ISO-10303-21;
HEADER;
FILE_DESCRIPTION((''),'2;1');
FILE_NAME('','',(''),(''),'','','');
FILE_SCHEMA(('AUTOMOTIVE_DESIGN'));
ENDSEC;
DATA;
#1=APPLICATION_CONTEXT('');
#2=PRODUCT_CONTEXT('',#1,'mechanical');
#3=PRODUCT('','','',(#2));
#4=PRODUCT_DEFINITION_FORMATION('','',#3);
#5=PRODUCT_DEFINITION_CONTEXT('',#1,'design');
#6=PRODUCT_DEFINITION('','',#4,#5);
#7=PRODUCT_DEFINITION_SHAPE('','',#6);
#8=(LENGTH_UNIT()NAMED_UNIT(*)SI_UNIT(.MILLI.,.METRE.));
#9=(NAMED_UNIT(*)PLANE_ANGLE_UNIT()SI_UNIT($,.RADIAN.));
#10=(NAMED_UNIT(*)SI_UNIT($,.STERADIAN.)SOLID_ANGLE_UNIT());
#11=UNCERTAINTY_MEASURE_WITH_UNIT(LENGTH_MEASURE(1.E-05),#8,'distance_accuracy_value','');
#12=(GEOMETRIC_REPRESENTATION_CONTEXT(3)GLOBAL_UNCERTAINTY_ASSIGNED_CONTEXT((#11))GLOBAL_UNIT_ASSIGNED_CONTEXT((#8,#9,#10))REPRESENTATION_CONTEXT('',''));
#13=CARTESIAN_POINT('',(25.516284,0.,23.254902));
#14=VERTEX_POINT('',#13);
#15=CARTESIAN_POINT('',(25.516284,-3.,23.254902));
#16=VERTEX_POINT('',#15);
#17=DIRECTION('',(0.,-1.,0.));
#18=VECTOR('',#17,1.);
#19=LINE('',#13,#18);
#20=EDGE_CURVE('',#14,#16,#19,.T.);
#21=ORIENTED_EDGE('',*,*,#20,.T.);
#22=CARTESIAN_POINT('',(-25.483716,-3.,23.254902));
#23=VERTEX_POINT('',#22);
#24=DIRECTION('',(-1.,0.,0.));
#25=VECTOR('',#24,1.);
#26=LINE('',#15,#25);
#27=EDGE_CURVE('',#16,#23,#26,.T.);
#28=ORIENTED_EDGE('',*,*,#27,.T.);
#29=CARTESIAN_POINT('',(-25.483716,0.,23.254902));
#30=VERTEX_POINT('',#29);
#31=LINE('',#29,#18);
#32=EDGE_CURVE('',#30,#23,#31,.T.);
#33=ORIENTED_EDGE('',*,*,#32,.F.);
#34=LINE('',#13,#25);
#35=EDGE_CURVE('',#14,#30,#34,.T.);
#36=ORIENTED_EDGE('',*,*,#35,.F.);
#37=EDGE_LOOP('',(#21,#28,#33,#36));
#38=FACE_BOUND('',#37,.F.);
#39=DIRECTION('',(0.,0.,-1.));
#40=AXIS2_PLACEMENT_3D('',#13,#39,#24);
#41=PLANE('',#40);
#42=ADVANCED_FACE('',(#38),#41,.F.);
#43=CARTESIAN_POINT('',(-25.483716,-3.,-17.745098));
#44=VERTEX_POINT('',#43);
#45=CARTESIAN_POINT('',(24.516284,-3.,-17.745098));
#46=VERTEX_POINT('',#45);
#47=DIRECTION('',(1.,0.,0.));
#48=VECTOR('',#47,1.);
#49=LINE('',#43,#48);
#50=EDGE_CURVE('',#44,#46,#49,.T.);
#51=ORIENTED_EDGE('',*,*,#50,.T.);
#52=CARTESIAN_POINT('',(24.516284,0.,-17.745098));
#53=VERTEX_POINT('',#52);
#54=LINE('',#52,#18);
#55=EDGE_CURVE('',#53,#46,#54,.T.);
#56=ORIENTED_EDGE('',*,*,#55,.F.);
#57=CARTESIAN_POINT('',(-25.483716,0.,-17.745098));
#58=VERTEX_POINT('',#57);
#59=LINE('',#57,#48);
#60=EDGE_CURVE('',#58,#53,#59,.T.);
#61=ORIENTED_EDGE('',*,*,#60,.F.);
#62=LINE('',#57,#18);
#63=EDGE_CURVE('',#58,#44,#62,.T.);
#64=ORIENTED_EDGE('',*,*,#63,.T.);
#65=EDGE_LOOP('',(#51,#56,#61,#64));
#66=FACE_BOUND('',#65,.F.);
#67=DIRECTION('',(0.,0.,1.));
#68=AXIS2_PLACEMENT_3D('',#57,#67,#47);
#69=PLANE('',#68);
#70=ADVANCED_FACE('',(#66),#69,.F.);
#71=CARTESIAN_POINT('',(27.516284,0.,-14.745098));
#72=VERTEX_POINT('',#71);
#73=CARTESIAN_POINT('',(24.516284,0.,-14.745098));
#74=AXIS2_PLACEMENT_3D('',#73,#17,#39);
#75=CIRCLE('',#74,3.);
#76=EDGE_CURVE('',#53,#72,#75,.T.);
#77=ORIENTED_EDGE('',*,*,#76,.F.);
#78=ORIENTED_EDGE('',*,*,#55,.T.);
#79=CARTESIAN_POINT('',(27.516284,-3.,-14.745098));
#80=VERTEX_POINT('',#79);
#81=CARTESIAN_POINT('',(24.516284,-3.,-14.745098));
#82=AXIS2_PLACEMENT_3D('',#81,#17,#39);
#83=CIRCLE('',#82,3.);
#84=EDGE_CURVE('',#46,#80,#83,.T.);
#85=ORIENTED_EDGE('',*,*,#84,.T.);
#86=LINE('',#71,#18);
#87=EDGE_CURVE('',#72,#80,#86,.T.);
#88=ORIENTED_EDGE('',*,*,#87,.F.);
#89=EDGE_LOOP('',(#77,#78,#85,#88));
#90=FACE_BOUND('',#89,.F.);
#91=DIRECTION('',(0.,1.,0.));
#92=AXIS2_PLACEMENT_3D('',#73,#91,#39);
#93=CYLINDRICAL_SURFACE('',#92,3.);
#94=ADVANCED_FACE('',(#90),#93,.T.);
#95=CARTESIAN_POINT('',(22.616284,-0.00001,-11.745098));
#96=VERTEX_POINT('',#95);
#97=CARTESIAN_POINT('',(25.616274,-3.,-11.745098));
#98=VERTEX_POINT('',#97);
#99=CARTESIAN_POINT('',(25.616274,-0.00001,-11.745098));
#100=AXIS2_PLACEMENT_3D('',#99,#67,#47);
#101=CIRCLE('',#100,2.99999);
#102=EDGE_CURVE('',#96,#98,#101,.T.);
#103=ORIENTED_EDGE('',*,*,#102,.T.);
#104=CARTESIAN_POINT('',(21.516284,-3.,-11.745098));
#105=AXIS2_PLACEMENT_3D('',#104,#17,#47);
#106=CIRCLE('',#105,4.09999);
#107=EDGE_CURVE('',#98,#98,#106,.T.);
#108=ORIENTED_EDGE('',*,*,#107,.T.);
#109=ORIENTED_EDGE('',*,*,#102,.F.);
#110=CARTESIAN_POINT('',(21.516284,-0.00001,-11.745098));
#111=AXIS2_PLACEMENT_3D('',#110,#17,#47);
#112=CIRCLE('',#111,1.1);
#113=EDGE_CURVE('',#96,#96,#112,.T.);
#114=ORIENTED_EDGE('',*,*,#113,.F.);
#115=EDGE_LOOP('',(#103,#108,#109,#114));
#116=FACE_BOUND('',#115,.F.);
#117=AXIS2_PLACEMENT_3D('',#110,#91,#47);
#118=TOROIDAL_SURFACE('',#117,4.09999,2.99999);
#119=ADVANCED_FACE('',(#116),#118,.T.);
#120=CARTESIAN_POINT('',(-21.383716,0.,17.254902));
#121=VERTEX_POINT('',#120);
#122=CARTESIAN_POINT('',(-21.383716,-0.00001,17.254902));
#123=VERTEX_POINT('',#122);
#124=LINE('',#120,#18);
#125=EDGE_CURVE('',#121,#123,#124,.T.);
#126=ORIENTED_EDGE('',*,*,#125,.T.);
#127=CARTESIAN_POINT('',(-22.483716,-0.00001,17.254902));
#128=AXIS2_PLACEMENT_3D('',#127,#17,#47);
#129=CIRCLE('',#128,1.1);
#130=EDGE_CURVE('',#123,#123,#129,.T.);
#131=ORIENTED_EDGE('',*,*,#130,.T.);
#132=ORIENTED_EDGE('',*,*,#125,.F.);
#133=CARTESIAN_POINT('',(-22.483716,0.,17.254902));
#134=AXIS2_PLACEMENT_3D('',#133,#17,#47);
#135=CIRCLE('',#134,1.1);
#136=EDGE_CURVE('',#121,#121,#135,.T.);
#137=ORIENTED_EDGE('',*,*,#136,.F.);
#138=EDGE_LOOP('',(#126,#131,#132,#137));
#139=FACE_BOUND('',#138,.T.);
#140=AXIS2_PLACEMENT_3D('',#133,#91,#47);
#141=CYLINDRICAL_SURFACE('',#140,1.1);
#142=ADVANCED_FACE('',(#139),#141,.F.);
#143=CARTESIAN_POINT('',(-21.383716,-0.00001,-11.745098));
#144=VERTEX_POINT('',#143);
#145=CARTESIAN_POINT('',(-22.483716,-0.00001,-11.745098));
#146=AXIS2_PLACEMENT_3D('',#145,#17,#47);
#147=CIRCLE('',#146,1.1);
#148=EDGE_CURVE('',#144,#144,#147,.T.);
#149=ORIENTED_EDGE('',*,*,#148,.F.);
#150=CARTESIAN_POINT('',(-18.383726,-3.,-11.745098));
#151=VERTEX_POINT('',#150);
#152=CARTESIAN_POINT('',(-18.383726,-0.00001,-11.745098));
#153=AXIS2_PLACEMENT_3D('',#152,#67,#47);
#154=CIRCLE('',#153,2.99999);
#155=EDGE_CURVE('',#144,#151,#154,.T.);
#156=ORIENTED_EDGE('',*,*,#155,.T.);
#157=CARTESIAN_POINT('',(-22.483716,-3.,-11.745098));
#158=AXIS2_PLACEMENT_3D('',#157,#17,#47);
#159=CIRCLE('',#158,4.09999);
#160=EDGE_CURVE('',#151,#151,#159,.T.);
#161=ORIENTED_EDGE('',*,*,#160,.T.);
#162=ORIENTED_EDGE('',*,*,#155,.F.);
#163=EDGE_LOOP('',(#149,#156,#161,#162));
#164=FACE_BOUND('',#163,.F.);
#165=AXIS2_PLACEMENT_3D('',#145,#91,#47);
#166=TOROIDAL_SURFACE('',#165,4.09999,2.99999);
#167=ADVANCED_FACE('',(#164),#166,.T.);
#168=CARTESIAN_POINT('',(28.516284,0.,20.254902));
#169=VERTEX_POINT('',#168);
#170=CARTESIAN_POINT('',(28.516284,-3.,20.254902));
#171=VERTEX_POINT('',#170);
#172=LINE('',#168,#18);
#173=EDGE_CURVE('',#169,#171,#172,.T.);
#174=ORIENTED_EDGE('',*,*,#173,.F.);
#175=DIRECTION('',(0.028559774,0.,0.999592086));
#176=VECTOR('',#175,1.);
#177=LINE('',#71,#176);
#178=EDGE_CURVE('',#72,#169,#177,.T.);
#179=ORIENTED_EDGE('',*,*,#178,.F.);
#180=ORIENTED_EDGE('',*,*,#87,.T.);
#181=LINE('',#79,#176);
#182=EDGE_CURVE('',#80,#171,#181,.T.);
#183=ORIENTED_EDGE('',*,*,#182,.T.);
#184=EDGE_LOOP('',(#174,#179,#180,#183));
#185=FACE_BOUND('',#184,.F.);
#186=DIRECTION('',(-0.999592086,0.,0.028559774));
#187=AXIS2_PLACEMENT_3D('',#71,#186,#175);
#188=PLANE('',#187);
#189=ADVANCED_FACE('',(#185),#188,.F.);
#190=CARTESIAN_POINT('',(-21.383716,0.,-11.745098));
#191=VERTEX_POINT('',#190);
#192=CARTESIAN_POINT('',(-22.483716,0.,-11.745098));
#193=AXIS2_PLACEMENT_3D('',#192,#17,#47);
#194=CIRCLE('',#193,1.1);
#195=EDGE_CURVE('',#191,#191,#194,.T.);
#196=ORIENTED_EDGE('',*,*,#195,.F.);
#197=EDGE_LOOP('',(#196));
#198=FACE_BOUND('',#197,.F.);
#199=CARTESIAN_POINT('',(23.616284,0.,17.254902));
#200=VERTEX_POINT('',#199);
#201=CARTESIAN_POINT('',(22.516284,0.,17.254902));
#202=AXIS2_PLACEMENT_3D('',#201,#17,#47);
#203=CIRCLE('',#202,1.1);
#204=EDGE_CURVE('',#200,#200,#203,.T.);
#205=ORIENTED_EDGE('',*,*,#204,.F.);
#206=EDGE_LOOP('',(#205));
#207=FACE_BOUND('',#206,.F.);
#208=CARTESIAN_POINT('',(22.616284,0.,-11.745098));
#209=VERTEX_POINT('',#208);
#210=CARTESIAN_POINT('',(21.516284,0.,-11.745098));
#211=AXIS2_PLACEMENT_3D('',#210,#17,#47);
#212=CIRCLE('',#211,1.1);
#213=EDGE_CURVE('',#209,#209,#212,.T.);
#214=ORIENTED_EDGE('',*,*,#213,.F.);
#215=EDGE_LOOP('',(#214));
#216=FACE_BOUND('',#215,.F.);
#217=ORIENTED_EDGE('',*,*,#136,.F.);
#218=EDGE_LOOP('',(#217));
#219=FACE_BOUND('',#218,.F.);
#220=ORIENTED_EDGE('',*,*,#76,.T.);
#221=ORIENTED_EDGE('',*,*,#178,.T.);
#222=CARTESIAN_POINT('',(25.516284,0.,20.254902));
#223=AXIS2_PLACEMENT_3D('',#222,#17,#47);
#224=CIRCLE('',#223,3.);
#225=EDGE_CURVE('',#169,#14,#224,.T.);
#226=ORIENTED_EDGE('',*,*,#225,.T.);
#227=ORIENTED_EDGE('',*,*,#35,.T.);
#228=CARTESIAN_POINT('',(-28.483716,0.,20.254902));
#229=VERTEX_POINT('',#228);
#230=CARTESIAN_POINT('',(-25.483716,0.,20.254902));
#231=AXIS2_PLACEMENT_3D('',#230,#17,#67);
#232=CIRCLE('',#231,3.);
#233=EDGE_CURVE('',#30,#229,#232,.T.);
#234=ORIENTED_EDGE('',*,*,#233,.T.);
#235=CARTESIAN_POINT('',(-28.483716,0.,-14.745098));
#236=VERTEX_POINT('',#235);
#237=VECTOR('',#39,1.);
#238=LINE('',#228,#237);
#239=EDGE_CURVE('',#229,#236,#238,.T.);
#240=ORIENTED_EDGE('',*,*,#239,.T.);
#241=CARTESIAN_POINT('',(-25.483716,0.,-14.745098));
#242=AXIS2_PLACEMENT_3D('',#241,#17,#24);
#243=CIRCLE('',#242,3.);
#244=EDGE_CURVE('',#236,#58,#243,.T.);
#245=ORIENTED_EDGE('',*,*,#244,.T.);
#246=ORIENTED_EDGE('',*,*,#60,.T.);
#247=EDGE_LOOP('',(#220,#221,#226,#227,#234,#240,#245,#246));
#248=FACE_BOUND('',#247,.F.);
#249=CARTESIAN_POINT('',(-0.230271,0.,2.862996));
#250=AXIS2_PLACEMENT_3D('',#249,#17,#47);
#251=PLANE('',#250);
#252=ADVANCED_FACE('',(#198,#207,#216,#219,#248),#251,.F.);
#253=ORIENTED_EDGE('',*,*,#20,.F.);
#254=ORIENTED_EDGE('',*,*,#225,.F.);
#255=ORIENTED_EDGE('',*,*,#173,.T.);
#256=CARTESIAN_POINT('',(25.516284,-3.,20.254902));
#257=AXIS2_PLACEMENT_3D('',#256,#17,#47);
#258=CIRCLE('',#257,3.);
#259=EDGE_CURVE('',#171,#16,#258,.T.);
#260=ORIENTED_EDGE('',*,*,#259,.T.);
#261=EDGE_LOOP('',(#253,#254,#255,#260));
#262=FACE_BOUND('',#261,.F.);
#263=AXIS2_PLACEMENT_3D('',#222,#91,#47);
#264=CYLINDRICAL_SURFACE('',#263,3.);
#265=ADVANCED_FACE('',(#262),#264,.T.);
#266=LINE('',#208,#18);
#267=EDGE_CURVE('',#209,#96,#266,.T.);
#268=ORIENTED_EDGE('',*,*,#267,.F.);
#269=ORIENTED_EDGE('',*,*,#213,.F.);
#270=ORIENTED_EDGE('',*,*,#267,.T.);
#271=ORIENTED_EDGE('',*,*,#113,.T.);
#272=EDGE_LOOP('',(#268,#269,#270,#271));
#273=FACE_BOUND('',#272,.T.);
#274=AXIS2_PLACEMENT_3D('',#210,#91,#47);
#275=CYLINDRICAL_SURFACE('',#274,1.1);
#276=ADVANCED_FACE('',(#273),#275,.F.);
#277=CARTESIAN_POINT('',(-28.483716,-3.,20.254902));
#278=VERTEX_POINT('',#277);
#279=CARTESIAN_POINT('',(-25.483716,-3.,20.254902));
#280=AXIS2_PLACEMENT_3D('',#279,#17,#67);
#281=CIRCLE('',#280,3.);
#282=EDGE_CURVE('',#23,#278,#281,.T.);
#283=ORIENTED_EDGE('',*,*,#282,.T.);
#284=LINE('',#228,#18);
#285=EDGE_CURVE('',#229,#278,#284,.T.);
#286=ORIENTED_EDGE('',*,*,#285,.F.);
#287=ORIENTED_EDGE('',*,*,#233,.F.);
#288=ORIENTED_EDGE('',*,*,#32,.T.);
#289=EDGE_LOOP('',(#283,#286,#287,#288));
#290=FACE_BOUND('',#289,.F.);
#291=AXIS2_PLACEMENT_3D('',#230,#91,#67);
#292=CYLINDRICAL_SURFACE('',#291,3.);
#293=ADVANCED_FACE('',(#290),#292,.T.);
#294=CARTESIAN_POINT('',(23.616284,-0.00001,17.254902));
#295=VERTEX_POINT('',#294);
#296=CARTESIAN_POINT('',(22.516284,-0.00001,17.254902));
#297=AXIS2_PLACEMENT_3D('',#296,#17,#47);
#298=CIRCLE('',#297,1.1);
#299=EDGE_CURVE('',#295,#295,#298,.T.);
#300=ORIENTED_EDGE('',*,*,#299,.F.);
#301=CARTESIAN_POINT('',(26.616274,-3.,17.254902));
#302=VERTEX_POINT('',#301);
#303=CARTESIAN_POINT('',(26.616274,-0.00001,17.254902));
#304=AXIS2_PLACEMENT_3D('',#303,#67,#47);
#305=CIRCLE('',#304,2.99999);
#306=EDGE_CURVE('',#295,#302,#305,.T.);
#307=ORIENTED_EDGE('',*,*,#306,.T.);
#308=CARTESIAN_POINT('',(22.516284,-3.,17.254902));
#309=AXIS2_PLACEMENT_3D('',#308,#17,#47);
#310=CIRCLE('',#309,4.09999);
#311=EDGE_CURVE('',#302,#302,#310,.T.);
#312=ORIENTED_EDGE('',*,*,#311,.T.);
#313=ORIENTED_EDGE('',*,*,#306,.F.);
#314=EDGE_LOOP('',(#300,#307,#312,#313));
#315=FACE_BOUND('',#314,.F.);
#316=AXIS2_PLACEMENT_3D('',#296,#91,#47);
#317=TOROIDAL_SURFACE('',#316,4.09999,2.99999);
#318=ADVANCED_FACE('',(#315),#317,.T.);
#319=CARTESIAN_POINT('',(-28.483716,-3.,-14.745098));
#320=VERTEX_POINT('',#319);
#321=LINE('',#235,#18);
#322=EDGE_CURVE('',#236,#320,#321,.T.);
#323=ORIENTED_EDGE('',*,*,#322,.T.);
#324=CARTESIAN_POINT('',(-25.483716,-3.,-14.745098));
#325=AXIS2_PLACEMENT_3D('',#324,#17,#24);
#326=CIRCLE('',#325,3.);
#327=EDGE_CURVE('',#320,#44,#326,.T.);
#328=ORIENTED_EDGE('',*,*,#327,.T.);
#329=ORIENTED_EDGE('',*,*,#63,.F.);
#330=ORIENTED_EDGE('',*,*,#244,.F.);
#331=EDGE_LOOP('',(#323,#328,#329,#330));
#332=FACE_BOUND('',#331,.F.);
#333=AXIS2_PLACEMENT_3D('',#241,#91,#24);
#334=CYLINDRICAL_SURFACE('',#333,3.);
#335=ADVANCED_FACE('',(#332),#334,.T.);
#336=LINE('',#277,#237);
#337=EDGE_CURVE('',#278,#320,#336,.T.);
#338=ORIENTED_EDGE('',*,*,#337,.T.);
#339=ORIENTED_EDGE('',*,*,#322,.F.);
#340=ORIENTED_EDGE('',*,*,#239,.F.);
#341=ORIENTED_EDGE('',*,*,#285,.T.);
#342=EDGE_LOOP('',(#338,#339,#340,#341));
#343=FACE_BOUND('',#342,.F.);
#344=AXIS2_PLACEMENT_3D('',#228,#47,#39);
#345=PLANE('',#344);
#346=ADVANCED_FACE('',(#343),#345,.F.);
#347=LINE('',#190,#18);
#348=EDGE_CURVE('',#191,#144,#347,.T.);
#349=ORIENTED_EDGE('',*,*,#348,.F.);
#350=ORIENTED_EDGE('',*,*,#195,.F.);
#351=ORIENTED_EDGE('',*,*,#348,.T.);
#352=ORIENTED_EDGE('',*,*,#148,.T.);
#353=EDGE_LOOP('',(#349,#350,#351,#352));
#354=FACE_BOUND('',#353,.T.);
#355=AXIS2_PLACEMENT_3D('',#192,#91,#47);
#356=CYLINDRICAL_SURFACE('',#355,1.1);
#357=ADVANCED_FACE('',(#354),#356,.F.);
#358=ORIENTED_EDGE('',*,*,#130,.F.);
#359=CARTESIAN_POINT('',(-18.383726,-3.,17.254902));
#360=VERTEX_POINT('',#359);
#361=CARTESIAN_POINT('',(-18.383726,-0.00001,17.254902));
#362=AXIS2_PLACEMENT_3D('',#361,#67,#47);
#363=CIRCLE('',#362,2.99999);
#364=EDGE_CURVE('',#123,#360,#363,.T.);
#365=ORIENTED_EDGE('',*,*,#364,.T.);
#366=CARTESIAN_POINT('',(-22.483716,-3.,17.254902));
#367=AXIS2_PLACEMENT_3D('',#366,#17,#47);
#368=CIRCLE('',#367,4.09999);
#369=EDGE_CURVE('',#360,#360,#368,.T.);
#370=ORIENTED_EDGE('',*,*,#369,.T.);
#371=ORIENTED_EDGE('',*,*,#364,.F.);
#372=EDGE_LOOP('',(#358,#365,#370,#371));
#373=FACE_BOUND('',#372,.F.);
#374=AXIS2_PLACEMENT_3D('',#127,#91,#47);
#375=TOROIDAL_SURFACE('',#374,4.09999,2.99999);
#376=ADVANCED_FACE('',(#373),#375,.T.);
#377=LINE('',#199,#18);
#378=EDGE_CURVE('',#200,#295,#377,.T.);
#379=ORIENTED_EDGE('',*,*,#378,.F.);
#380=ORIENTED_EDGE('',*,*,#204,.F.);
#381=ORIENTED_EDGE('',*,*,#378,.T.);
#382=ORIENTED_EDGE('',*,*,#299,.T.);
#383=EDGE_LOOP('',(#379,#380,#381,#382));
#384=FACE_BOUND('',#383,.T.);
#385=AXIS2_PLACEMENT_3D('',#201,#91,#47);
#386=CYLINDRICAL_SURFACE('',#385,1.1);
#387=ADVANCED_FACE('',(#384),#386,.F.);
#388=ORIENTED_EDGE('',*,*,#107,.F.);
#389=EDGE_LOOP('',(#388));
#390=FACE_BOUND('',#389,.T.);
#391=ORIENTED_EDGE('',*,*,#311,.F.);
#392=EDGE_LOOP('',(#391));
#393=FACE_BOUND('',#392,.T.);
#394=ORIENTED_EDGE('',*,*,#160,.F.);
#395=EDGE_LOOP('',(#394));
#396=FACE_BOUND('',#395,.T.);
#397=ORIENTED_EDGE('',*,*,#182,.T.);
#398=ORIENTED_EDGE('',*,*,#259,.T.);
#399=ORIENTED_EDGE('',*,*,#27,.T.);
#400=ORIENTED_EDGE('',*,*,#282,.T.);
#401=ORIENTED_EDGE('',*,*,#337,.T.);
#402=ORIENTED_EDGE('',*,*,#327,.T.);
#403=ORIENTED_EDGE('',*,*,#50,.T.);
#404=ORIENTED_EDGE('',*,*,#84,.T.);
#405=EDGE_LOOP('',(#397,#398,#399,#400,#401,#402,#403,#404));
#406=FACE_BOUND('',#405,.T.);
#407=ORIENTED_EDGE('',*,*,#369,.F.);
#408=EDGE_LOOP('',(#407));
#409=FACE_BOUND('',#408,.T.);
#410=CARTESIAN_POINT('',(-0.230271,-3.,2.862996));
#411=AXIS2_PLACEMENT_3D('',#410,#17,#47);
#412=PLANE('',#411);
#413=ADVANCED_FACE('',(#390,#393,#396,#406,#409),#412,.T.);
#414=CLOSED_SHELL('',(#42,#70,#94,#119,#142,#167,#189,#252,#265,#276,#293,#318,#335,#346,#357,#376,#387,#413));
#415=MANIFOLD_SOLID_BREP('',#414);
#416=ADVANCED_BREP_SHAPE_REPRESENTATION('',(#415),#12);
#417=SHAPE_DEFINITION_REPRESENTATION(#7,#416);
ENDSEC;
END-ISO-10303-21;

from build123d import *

# Parameters (mm, degrees)
F0_W     = 3.689654345
F0_H     = 2
F0_W_2   = 6
F0_H_2   = 6
F0_R     = 1.1
F0_W_3   = 3.6920479782
F0_W_4   = 3.5541171093
F1_DEPTH = 3
F2_R     = 2.99999


# Not quite as in the source:
# - a fillet or chamfer is up to 0.001 mm smaller than in the source, because OpenCascade refuses the exact size


with BuildPart() as f1:
    # F0 (on Front) → F1 (new body)
    with BuildSketch(Plane.XZ):
        with BuildLine():
            Line((25.5162836348, 23.2549019608), (-25.4837163652, 23.2549019608))
            ThreePointArc((-25.4837163652, 23.2549019608), (-27.6050367088, 22.3762223043), (-28.4837163652, 20.2549019608))
            Line((-28.4837163652, 20.2549019608), (-28.4837163652, -14.7450980392))
            ThreePointArc((-28.4837163652, -14.7450980392), (-27.6050367088, -16.8664183828), (-25.4837163652, -17.7450980392))
            Line((-25.4837163652, -17.7450980392), (24.5162836348, -17.7450980392))
            ThreePointArc((24.5162836348, -17.7450980392), (26.6376039783, -16.8664183828), (27.5162836348, -14.7450980392))
            Line((27.5162836348, -14.7450980392), (28.5162836348, 20.2549019608))
            ThreePointArc((28.5162836348, 20.2549019608), (27.6376039783, 22.3762223043), (25.5162836348, 23.2549019608))
        make_face()
        Polygon((-25.4837163652, -8.7450980392), (-25.4837163652, -6.7450980392), (-25.4837163652, -4.7450980392), (-25.4837163652, -2.7450980392), (-25.4837163652, -0.7450980392), (-25.4837163652, 14.2549019608), (-25.4837163652, 20.2549019608), (-19.4837163652, 20.2549019608), (19.5162836348, 20.2549019608), (25.5162836348, 20.2549019608), (25.5162836348, 14.2549019608), (25.5162836348, -14.7450980392), (24.5162836348, -14.7450980392), (18.5162836348, -14.7450980392), (-19.4837163652, -14.7450980392), (-25.4837163652, -14.7450980392), align=None, mode=Mode.SUBTRACT)
        Polygon((-21.929599256, -6.7450980392), (-25.4837163652, -6.7450980392), (-25.4837163652, -8.7450980392), (-19.4837163652, -8.7450980392), (-19.4837163652, -14.7450980392), (18.5162836348, -14.7450980392), (18.5162836348, -8.7450980392), (24.5162836348, -8.7450980392), (24.5162836348, -14.7450980392), (25.5162836348, -14.7450980392), (25.5162836348, 14.2549019608), (19.5162836348, 14.2549019608), (19.5162836348, 20.2549019608), (-19.4837163652, 20.2549019608), (-19.4837163652, 14.2549019608), (-25.4837163652, 14.2549019608), (-25.4837163652, -0.7450980392), (-21.791668387, -0.7450980392), (-21.791668387, -2.7450980392), (-25.4837163652, -2.7450980392), (-25.4837163652, -4.7450980392), (-21.929599256, -4.7450980392), align=None)
        with Locations((22.6714564623, -1.7450980392)):
            Rectangle(F0_W, F0_H, mode=Mode.SUBTRACT)
        with Locations((22.5162836348, 17.2549019608)):
            Rectangle(F0_W_2, F0_H_2)
        with Locations((22.5162836348, 17.2549019608)):
            Circle(F0_R, mode=Mode.SUBTRACT)
        with Locations((-22.4837163652, 17.2549019608)):
            Rectangle(F0_W_2, F0_H_2)
        with Locations((-22.4837163652, 17.2549019608)):
            Circle(F0_R, mode=Mode.SUBTRACT)
        with Locations((-22.4837163652, -11.7450980392)):
            Rectangle(F0_W_2, F0_H_2)
        with Locations((-22.4837163652, -11.7450980392)):
            Circle(F0_R, mode=Mode.SUBTRACT)
        with Locations((21.5162836348, -11.7450980392)):
            Rectangle(F0_W_2, F0_H_2)
        with Locations((21.5162836348, -11.7450980392)):
            Circle(F0_R, mode=Mode.SUBTRACT)
        with Locations((-23.6376923761, -1.7450980392)):
            Rectangle(F0_W_3, F0_H)
        with Locations((22.6714564623, -1.7450980392)):
            Rectangle(F0_W, F0_H)
        with Locations((-23.7066578106, -5.7450980392)):
            Rectangle(F0_W_4, F0_H)
    extrude(amount=F1_DEPTH)

    # F2 (radius 3 in the source; OpenCascade refuses exactly that, so slightly less here)
    f2_edges = [f1.edges().sort_by_distance(p)[0] for p in [
        (-23.583716, -3, -11.745098),
        (-23.583716, -3, 17.254902),
        (21.416284, -3, 17.254902),
        (20.416284, -3, -11.745098),
    ]]
    fillet(f2_edges, radius=F2_R)


solid = f1.part
